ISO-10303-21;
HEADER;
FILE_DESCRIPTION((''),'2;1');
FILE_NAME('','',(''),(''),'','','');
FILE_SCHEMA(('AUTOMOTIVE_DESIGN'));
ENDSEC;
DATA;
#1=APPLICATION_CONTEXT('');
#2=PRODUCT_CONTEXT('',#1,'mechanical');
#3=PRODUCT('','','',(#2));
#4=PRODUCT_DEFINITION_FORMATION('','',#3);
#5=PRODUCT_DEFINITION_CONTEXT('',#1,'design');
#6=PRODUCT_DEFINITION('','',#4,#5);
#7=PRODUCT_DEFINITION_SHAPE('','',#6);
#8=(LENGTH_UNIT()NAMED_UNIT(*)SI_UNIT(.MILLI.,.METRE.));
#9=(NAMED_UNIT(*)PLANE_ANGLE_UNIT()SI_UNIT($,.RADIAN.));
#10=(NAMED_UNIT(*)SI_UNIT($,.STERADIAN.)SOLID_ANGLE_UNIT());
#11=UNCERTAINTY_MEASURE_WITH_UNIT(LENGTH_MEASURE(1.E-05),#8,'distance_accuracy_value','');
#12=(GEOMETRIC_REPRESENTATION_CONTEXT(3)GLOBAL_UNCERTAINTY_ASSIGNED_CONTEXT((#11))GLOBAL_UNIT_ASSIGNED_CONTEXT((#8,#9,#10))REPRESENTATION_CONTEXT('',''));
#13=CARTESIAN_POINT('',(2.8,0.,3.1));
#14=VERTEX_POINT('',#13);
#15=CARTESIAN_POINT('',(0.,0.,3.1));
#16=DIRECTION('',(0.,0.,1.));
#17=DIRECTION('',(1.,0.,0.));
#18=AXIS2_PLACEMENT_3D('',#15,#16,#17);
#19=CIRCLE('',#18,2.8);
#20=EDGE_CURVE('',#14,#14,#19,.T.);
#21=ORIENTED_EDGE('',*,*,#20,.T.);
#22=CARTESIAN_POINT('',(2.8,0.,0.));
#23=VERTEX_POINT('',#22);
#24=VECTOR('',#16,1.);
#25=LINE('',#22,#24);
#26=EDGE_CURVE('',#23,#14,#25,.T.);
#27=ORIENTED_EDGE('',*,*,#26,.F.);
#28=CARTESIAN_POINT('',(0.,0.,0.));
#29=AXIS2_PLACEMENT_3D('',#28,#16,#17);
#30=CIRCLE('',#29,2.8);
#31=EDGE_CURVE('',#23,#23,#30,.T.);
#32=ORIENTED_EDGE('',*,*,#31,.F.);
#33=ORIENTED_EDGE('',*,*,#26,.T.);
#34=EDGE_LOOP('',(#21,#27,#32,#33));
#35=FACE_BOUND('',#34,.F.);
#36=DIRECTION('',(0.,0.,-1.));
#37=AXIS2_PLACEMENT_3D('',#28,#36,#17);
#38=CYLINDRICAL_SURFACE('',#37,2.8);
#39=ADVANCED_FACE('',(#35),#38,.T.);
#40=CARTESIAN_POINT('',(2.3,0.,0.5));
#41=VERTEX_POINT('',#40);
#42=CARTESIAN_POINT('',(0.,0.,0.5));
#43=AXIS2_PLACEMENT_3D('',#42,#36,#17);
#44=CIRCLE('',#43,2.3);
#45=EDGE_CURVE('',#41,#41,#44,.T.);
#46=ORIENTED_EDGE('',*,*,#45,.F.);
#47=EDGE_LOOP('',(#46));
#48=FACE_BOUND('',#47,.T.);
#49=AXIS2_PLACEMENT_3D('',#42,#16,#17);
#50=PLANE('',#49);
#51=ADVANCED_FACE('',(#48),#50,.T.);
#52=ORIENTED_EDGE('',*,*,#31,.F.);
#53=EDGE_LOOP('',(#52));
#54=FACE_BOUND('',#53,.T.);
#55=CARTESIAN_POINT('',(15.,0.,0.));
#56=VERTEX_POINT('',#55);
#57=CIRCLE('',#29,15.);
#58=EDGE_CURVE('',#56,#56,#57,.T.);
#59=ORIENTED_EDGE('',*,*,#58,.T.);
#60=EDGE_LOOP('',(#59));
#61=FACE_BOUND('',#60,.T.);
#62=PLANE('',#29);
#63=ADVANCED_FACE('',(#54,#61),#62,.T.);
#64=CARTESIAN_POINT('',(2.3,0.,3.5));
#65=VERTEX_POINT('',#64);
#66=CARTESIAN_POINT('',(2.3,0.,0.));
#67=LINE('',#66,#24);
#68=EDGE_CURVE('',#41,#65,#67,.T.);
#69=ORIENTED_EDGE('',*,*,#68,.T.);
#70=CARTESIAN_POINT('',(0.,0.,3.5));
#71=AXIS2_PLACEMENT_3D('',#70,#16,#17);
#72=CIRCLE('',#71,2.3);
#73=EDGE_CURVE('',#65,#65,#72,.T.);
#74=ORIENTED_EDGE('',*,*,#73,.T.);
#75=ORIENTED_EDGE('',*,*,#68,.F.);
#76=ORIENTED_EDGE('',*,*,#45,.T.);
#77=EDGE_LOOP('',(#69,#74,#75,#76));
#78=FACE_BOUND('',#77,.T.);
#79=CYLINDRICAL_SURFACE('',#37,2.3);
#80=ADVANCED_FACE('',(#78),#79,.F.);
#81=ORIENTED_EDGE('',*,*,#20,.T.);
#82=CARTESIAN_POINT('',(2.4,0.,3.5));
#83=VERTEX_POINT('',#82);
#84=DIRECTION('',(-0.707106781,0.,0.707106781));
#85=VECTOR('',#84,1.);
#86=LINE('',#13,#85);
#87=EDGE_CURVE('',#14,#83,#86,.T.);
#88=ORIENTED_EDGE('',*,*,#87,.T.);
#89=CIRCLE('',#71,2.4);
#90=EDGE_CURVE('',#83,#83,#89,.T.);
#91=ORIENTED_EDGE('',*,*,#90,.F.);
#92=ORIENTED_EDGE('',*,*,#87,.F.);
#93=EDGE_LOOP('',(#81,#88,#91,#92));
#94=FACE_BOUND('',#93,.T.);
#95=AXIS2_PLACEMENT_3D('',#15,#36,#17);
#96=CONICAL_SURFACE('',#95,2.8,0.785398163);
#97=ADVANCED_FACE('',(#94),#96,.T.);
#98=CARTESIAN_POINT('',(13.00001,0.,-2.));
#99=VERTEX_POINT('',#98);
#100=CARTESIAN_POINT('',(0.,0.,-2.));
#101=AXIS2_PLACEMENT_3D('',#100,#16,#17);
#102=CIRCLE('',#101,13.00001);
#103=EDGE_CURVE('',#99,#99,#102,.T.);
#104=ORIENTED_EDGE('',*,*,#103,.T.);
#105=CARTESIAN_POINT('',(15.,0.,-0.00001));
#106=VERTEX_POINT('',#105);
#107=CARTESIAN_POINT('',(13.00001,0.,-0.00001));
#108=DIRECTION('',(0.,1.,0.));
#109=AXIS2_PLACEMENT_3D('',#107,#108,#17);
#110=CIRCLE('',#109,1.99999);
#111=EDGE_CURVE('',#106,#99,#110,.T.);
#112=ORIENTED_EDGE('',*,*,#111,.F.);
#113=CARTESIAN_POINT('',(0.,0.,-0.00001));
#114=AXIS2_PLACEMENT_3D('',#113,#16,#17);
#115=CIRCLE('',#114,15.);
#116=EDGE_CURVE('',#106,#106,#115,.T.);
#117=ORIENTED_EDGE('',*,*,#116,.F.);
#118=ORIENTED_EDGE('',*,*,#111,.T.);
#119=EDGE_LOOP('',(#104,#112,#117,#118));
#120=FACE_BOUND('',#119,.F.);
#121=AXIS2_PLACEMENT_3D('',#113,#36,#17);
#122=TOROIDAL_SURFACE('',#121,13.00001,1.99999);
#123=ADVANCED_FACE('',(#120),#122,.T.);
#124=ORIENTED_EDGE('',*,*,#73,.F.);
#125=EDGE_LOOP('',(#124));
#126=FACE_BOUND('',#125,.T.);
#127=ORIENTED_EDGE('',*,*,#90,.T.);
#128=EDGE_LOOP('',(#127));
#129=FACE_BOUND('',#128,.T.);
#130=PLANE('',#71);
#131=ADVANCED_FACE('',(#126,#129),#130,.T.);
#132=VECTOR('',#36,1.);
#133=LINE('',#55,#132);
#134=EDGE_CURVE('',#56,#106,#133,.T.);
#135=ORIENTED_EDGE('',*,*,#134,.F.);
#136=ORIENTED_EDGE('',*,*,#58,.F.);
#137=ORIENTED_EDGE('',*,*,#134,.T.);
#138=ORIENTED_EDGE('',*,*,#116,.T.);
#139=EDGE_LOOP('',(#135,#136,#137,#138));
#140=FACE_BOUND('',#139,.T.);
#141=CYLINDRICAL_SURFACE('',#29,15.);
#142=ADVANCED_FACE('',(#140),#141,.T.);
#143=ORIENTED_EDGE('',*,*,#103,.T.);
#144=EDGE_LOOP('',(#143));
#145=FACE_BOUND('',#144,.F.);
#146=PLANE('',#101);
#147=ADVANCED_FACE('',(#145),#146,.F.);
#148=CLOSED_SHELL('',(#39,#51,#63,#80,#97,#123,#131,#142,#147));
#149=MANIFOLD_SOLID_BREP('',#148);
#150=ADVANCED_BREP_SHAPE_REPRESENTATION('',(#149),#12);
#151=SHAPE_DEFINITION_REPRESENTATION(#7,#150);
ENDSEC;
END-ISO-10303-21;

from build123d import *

# Parameters (mm, degrees)
F0_R      = 2.8
F1_DEPTH  = 3.5
F2_T      = -0.5
F0_R_2    = 15
F1_FACE_R = 2.8
F3_DEPTH  = 2
F4_R      = 1.99999
F5_SIZE   = 0.4


# Not quite as in the source:
# - a fillet or chamfer is up to 0.001 mm smaller than in the source, because OpenCascade refuses the exact size


with BuildPart() as f1:
    # F0 (on Top) → F1 (new body)
    with BuildSketch(Plane.XY):
        Circle(F0_R)
    extrude(amount=F1_DEPTH)

    # F2
    f2_openings = [f1.faces().sort_by_distance(p)[0] for p in [
        (0, 0, 3.5),
    ]]
    offset(amount=F2_T, openings=f2_openings)

    # F0 (on Top) + F1_face (on face) → F3 (join)
    with BuildSketch(Plane.XY):
        Circle(F0_R_2)
        Circle(F0_R, mode=Mode.SUBTRACT)
    with BuildSketch(Plane(origin=(0, 0, 0), x_dir=(1, 0, 0), z_dir=(0, 0, -1))):
        Circle(F1_FACE_R)
    extrude(amount=-F3_DEPTH, dir=(0, 0, 1))

    # F4 (radius 2 in the source; OpenCascade refuses exactly that, so slightly less here)
    f4_edges = [f1.edges().sort_by_distance(p)[0] for p in [
        (-15, 0, -2),
    ]]
    fillet(f4_edges, radius=F4_R)

    # F5
    f5_edges = [f1.edges().sort_by_distance(p)[0] for p in [
        (-2.8, 0, 3.5),
    ]]
    chamfer(f5_edges, length=F5_SIZE)


solid = f1.part
